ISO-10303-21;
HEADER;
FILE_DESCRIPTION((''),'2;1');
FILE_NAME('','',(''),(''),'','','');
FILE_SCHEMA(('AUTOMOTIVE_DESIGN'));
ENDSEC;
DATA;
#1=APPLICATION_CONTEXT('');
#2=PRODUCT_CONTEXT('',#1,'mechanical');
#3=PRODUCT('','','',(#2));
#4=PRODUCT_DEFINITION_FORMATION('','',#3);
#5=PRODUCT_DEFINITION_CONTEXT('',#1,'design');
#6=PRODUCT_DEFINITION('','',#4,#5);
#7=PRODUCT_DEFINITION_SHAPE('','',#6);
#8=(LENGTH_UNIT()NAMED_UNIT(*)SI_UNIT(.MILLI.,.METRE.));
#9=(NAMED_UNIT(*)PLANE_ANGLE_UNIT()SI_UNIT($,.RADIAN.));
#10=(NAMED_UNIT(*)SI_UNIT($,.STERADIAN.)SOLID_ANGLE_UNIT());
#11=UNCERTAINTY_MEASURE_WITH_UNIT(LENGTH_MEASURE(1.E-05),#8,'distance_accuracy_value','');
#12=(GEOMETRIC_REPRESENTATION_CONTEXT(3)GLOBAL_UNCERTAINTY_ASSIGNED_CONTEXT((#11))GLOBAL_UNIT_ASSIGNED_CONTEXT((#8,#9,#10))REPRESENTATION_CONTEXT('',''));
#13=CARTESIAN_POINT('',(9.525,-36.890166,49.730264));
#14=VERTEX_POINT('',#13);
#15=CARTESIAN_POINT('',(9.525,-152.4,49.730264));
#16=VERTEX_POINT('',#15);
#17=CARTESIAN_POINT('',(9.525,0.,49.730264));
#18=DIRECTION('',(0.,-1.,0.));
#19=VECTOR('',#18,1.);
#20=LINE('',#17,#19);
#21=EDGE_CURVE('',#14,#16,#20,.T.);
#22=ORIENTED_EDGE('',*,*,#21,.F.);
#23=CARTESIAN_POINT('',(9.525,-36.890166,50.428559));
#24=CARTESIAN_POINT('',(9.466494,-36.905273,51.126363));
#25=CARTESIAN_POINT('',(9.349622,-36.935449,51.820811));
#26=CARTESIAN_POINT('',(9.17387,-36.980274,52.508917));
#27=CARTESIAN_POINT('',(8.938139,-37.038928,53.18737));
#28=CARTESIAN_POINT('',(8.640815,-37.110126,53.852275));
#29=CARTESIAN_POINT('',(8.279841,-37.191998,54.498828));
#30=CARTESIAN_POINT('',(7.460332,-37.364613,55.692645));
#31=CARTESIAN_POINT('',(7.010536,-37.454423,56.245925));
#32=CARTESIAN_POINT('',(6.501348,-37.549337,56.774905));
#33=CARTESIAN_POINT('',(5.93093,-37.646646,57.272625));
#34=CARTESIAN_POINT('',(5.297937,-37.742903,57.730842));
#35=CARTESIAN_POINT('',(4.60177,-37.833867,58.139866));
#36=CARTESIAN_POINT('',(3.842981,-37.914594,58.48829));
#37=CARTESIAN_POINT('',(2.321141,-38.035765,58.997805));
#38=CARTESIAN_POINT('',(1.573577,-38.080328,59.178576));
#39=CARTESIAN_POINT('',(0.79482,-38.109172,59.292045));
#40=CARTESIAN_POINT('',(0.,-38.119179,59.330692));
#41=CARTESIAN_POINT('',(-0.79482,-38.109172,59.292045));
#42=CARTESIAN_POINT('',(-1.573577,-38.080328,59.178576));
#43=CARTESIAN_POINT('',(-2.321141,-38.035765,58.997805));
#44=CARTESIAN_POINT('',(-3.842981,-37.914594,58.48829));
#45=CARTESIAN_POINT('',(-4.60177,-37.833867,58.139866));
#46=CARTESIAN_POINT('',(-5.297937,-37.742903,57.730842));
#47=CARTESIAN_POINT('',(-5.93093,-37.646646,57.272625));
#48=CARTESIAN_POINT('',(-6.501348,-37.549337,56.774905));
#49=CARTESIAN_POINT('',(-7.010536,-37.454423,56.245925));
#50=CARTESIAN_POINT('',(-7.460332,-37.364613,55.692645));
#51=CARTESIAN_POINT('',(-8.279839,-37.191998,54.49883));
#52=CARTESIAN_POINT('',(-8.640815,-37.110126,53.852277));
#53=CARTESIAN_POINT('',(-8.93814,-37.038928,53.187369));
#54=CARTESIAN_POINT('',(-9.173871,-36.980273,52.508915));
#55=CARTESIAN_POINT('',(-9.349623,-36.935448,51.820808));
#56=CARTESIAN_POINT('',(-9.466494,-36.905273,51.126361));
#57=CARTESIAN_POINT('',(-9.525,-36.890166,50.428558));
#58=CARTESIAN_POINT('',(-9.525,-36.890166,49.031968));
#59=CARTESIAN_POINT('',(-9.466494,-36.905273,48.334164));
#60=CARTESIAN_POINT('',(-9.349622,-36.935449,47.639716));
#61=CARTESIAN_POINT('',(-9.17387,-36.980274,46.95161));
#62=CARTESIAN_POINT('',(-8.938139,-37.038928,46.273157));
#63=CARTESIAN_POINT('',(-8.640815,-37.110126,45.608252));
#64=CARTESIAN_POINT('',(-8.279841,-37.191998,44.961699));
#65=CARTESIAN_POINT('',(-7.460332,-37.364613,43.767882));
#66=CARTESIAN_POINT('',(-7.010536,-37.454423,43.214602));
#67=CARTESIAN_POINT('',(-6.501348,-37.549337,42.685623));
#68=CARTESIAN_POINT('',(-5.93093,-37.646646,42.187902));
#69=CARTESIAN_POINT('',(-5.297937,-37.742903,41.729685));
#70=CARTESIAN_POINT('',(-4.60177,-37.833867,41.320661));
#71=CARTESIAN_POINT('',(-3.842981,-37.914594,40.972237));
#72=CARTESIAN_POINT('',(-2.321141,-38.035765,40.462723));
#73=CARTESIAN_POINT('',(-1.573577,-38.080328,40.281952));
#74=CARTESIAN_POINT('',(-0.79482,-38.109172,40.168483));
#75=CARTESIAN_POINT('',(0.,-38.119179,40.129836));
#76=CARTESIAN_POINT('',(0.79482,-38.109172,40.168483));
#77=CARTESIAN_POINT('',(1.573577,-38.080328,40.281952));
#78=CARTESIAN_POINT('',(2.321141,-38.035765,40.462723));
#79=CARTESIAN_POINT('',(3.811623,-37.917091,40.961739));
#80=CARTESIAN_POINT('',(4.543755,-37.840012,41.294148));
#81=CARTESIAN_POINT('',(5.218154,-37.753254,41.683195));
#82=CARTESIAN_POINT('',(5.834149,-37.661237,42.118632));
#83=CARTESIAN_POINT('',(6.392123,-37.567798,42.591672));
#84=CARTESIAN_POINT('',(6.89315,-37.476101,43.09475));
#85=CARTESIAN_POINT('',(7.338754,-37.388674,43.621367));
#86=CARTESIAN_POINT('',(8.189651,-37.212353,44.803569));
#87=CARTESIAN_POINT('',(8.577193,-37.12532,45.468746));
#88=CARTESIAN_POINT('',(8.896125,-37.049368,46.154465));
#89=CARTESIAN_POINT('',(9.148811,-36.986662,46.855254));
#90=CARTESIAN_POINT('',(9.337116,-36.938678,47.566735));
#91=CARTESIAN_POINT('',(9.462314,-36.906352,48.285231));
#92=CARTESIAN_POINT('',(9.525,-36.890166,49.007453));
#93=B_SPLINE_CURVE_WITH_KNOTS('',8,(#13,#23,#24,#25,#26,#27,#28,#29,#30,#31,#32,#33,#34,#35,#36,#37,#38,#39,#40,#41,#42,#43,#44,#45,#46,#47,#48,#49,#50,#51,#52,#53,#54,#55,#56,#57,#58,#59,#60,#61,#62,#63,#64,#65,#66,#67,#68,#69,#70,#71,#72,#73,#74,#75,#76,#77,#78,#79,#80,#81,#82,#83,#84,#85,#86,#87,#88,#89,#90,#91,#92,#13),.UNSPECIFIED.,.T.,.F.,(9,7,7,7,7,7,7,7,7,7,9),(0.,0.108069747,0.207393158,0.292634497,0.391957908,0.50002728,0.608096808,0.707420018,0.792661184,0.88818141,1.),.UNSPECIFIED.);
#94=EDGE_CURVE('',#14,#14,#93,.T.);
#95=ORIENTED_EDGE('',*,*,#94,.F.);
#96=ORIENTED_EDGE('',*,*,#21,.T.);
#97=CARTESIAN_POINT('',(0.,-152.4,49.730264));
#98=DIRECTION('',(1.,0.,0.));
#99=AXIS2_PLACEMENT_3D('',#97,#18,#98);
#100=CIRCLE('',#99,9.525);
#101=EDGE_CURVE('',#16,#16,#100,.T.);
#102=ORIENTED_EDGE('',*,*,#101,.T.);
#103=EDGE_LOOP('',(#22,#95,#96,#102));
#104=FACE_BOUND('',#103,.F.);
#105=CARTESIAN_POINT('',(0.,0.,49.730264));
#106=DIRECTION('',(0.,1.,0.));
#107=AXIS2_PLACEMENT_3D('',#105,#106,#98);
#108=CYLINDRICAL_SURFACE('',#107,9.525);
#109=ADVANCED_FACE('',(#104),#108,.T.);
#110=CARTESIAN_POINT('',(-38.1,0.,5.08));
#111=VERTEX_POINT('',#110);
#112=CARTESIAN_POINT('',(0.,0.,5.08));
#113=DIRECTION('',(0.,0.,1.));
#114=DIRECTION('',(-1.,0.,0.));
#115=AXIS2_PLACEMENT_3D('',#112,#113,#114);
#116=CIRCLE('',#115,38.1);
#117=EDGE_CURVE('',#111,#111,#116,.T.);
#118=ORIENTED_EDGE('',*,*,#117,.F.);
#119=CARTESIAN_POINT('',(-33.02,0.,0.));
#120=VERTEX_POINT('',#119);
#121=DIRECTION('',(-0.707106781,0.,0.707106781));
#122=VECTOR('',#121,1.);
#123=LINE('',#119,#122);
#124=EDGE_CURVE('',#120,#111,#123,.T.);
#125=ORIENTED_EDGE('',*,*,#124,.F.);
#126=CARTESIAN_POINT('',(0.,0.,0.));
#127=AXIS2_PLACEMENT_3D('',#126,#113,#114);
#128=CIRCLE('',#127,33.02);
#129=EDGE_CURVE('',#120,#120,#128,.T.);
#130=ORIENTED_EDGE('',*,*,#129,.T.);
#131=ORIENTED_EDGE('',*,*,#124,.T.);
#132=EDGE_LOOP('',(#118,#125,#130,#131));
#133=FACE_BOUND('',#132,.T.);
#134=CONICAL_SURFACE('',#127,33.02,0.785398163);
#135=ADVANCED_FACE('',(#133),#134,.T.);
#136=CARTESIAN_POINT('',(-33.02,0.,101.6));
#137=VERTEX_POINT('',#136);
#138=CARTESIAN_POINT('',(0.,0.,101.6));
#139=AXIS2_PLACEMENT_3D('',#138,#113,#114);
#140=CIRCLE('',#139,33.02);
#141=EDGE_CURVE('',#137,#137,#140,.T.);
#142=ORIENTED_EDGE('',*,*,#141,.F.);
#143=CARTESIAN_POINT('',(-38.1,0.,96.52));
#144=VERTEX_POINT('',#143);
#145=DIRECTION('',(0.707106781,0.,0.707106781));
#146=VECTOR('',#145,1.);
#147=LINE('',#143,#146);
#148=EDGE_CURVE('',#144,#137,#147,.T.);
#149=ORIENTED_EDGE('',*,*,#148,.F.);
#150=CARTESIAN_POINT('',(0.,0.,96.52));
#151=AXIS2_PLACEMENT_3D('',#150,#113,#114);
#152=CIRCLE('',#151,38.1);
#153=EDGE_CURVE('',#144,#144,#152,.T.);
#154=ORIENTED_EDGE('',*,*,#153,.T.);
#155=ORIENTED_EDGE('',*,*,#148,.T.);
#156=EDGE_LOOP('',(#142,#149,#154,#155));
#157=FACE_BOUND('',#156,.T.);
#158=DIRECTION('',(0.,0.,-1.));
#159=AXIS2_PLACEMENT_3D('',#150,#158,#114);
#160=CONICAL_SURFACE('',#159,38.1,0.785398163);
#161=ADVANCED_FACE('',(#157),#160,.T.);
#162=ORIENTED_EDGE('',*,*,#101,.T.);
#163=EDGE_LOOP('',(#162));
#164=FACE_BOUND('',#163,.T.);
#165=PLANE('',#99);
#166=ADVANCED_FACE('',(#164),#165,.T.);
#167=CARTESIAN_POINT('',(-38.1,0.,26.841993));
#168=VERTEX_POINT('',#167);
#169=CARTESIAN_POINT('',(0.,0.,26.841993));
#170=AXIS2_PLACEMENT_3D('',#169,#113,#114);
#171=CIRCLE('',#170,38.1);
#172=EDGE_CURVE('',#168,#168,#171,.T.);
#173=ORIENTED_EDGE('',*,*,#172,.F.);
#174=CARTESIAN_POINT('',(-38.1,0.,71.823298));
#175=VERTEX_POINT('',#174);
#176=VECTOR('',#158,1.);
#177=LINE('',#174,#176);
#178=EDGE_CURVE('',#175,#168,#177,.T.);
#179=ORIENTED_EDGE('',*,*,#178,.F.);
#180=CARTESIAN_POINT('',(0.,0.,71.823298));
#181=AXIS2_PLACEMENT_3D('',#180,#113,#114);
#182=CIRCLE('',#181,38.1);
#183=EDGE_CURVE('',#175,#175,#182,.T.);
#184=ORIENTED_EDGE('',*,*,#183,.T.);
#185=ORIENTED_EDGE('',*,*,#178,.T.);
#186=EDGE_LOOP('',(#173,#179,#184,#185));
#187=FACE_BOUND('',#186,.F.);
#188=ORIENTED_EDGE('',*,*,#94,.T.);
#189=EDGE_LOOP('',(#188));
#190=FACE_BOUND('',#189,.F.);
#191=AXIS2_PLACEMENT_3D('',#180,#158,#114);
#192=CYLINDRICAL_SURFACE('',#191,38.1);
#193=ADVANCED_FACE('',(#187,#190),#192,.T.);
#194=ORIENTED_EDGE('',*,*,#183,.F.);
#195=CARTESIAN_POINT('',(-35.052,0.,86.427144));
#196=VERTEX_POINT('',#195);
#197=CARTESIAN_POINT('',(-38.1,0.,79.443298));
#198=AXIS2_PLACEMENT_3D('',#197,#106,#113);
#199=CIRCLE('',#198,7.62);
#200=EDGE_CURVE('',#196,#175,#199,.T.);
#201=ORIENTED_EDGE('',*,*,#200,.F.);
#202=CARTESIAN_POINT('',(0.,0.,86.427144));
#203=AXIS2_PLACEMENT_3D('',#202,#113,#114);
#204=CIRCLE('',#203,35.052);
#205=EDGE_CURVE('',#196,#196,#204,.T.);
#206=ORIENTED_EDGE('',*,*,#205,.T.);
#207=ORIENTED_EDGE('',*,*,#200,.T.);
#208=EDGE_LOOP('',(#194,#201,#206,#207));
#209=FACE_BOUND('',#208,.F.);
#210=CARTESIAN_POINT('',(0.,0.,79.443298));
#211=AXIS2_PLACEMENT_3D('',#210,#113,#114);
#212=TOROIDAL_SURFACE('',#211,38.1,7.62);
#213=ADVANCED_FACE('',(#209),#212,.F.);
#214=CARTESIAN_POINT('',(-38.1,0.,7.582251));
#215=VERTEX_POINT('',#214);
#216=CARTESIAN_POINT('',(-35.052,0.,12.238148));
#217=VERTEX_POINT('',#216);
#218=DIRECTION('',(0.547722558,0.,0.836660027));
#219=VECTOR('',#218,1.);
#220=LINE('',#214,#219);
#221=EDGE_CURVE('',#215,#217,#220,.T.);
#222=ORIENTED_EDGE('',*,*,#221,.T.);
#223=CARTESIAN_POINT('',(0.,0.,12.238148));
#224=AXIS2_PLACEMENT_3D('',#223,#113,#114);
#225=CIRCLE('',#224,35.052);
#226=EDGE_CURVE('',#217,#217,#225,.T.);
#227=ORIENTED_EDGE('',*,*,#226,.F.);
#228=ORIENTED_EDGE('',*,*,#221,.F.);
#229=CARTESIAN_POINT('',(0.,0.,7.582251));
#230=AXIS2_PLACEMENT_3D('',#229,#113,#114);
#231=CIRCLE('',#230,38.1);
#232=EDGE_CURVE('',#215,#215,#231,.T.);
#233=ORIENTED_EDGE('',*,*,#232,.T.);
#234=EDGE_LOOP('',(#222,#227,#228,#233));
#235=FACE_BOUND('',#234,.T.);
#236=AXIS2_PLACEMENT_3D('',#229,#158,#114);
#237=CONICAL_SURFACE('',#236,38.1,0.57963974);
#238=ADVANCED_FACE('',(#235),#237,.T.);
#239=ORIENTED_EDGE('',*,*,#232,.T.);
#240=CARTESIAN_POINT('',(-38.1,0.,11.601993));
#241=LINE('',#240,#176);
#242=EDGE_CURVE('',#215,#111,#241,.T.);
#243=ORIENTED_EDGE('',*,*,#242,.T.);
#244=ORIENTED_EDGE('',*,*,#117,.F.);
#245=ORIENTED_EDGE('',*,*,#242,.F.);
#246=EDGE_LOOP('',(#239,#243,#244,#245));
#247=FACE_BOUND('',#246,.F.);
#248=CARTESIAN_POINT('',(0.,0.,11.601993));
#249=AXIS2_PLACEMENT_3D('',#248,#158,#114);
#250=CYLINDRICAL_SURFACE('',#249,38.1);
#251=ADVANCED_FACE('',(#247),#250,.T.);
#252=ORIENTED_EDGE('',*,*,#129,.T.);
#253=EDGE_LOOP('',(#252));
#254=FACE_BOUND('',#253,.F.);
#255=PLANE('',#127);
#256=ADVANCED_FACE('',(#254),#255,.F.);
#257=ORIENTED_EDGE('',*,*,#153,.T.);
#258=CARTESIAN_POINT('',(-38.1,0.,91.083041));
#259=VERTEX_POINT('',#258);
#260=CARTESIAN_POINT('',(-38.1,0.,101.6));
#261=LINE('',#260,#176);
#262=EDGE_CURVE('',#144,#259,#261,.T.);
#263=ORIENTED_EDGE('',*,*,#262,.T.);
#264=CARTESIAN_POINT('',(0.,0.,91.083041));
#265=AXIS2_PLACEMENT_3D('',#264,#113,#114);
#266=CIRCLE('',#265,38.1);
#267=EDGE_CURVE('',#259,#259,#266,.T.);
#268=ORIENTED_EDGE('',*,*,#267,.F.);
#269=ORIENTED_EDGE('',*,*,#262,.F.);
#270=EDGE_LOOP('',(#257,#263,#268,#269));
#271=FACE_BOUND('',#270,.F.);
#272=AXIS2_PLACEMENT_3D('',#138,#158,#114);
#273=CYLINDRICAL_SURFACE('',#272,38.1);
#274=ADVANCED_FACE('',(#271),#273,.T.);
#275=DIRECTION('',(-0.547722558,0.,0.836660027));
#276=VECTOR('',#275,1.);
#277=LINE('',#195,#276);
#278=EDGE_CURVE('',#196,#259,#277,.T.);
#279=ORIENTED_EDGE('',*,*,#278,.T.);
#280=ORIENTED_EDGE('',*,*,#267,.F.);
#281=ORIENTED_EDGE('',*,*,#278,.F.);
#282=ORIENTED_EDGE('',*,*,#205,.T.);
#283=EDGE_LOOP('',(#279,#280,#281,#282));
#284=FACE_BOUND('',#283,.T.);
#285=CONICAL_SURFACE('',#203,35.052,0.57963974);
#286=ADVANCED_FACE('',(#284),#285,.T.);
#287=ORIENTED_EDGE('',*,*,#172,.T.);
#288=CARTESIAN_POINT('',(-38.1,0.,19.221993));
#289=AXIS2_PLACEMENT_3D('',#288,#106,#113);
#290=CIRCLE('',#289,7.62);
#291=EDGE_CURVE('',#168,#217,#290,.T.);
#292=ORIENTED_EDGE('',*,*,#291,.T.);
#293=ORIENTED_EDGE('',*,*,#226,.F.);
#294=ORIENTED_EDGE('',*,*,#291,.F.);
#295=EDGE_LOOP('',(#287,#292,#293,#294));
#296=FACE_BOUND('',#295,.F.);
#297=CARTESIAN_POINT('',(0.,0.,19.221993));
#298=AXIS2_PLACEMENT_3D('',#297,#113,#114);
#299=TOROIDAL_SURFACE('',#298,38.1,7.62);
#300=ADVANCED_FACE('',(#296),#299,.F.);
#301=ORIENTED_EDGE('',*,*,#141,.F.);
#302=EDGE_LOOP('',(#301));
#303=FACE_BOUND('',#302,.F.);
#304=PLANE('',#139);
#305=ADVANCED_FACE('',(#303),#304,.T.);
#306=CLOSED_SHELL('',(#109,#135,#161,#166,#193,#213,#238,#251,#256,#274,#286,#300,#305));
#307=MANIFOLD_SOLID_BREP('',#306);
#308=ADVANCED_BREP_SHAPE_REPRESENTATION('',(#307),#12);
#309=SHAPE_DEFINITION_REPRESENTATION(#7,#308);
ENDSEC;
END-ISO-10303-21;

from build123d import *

# Parameters (mm, degrees)
F2_R     = 9.525
F3_DEPTH = 152.4


# Not quite as in the source:
# - a fillet or chamfer that OpenCascade refuses, or shapes differently, is made with other operations: its cross-section is extruded or revolved along the edge and cut away or added


with BuildPart() as f1:
    # F0 (on Front) → F1 (revolve)
    with BuildSketch(Plane.XZ):
        with BuildLine():
            Line((-38.1, 0), (0, 0))
            Line((0, 0), (0, 101.6))
            Line((0, 101.6), (-38.1, 101.6))
            Line((-38.1, 101.6), (-38.1, 87.0632982802))
            ThreePointArc((-38.1, 87.0632982802), (-30.48, 79.4432982802), (-38.1, 71.8232982802))
            Line((-38.1, 71.8232982802), (-38.1, 26.8419931632))
            ThreePointArc((-38.1, 26.8419931632), (-30.48, 19.2219931632), (-38.1, 11.6019931632))
            Line((-38.1, 11.6019931632), (-38.1, 0))
        make_face()
    revolve(axis=Axis((0, 0, 50.8), (0, 0, 1)))

    # F2 (on Front) → F3 (join)
    with BuildSketch(Plane.XZ):
        with Locations((0, 49.7302636504)):
            Circle(F2_R)
    extrude(amount=F3_DEPTH)

    # F4: chamfer of 5.08 on 6 edges, made by hand

    # F4_s1 → F4_t2 (revolve, cut)
    with BuildSketch(Plane.XZ):
        Polygon((-38.1, 96.52), (-33.02, 101.6), (-38.1, 101.6), align=None)
    revolve(axis=Axis((0, 0, 101.6), (0, 0, 1)), mode=Mode.SUBTRACT)

    # F4_s3 → F4_t4 (revolve, cut)
    with BuildSketch(Plane.XZ):
        with BuildLine():
            Line((-35.052, 86.4271436394), (-38.1, 91.0830405454))
            Line((-38.1, 91.0830405454), (-38.1, 87.0632982802))
            ThreePointArc((-38.1, 87.0632982802), (-36.4706968515, 86.8870722727), (-35.052, 86.4271436394))
        make_face()
    revolve(axis=Axis((0, 0, 87.0632982802), (0, 0, 1)), mode=Mode.SUBTRACT)

    # F4_s5 → F4_t6 (revolve, cut)
    with BuildSketch(Plane.XZ):
        with BuildLine():
            Line((-38.1, 7.582250898), (-35.052, 12.2381478041))
            ThreePointArc((-35.052, 12.2381478041), (-36.4706968515, 11.7782191708), (-38.1, 11.6019931632))
            Line((-38.1, 11.6019931632), (-38.1, 7.582250898))
        make_face()
    revolve(axis=Axis((0, 0, 11.6019931632), (0, 0, 1)), mode=Mode.SUBTRACT)

    # F4_s7 → F4_t8 (revolve, cut)
    with BuildSketch(Plane.XZ):
        Polygon((-33.02, 0), (-38.1, 5.08), (-38.1, 0), align=None)
    revolve(axis=Axis((0, 0, 0), (0, 0, 1)), mode=Mode.SUBTRACT)


solid = f1.part
